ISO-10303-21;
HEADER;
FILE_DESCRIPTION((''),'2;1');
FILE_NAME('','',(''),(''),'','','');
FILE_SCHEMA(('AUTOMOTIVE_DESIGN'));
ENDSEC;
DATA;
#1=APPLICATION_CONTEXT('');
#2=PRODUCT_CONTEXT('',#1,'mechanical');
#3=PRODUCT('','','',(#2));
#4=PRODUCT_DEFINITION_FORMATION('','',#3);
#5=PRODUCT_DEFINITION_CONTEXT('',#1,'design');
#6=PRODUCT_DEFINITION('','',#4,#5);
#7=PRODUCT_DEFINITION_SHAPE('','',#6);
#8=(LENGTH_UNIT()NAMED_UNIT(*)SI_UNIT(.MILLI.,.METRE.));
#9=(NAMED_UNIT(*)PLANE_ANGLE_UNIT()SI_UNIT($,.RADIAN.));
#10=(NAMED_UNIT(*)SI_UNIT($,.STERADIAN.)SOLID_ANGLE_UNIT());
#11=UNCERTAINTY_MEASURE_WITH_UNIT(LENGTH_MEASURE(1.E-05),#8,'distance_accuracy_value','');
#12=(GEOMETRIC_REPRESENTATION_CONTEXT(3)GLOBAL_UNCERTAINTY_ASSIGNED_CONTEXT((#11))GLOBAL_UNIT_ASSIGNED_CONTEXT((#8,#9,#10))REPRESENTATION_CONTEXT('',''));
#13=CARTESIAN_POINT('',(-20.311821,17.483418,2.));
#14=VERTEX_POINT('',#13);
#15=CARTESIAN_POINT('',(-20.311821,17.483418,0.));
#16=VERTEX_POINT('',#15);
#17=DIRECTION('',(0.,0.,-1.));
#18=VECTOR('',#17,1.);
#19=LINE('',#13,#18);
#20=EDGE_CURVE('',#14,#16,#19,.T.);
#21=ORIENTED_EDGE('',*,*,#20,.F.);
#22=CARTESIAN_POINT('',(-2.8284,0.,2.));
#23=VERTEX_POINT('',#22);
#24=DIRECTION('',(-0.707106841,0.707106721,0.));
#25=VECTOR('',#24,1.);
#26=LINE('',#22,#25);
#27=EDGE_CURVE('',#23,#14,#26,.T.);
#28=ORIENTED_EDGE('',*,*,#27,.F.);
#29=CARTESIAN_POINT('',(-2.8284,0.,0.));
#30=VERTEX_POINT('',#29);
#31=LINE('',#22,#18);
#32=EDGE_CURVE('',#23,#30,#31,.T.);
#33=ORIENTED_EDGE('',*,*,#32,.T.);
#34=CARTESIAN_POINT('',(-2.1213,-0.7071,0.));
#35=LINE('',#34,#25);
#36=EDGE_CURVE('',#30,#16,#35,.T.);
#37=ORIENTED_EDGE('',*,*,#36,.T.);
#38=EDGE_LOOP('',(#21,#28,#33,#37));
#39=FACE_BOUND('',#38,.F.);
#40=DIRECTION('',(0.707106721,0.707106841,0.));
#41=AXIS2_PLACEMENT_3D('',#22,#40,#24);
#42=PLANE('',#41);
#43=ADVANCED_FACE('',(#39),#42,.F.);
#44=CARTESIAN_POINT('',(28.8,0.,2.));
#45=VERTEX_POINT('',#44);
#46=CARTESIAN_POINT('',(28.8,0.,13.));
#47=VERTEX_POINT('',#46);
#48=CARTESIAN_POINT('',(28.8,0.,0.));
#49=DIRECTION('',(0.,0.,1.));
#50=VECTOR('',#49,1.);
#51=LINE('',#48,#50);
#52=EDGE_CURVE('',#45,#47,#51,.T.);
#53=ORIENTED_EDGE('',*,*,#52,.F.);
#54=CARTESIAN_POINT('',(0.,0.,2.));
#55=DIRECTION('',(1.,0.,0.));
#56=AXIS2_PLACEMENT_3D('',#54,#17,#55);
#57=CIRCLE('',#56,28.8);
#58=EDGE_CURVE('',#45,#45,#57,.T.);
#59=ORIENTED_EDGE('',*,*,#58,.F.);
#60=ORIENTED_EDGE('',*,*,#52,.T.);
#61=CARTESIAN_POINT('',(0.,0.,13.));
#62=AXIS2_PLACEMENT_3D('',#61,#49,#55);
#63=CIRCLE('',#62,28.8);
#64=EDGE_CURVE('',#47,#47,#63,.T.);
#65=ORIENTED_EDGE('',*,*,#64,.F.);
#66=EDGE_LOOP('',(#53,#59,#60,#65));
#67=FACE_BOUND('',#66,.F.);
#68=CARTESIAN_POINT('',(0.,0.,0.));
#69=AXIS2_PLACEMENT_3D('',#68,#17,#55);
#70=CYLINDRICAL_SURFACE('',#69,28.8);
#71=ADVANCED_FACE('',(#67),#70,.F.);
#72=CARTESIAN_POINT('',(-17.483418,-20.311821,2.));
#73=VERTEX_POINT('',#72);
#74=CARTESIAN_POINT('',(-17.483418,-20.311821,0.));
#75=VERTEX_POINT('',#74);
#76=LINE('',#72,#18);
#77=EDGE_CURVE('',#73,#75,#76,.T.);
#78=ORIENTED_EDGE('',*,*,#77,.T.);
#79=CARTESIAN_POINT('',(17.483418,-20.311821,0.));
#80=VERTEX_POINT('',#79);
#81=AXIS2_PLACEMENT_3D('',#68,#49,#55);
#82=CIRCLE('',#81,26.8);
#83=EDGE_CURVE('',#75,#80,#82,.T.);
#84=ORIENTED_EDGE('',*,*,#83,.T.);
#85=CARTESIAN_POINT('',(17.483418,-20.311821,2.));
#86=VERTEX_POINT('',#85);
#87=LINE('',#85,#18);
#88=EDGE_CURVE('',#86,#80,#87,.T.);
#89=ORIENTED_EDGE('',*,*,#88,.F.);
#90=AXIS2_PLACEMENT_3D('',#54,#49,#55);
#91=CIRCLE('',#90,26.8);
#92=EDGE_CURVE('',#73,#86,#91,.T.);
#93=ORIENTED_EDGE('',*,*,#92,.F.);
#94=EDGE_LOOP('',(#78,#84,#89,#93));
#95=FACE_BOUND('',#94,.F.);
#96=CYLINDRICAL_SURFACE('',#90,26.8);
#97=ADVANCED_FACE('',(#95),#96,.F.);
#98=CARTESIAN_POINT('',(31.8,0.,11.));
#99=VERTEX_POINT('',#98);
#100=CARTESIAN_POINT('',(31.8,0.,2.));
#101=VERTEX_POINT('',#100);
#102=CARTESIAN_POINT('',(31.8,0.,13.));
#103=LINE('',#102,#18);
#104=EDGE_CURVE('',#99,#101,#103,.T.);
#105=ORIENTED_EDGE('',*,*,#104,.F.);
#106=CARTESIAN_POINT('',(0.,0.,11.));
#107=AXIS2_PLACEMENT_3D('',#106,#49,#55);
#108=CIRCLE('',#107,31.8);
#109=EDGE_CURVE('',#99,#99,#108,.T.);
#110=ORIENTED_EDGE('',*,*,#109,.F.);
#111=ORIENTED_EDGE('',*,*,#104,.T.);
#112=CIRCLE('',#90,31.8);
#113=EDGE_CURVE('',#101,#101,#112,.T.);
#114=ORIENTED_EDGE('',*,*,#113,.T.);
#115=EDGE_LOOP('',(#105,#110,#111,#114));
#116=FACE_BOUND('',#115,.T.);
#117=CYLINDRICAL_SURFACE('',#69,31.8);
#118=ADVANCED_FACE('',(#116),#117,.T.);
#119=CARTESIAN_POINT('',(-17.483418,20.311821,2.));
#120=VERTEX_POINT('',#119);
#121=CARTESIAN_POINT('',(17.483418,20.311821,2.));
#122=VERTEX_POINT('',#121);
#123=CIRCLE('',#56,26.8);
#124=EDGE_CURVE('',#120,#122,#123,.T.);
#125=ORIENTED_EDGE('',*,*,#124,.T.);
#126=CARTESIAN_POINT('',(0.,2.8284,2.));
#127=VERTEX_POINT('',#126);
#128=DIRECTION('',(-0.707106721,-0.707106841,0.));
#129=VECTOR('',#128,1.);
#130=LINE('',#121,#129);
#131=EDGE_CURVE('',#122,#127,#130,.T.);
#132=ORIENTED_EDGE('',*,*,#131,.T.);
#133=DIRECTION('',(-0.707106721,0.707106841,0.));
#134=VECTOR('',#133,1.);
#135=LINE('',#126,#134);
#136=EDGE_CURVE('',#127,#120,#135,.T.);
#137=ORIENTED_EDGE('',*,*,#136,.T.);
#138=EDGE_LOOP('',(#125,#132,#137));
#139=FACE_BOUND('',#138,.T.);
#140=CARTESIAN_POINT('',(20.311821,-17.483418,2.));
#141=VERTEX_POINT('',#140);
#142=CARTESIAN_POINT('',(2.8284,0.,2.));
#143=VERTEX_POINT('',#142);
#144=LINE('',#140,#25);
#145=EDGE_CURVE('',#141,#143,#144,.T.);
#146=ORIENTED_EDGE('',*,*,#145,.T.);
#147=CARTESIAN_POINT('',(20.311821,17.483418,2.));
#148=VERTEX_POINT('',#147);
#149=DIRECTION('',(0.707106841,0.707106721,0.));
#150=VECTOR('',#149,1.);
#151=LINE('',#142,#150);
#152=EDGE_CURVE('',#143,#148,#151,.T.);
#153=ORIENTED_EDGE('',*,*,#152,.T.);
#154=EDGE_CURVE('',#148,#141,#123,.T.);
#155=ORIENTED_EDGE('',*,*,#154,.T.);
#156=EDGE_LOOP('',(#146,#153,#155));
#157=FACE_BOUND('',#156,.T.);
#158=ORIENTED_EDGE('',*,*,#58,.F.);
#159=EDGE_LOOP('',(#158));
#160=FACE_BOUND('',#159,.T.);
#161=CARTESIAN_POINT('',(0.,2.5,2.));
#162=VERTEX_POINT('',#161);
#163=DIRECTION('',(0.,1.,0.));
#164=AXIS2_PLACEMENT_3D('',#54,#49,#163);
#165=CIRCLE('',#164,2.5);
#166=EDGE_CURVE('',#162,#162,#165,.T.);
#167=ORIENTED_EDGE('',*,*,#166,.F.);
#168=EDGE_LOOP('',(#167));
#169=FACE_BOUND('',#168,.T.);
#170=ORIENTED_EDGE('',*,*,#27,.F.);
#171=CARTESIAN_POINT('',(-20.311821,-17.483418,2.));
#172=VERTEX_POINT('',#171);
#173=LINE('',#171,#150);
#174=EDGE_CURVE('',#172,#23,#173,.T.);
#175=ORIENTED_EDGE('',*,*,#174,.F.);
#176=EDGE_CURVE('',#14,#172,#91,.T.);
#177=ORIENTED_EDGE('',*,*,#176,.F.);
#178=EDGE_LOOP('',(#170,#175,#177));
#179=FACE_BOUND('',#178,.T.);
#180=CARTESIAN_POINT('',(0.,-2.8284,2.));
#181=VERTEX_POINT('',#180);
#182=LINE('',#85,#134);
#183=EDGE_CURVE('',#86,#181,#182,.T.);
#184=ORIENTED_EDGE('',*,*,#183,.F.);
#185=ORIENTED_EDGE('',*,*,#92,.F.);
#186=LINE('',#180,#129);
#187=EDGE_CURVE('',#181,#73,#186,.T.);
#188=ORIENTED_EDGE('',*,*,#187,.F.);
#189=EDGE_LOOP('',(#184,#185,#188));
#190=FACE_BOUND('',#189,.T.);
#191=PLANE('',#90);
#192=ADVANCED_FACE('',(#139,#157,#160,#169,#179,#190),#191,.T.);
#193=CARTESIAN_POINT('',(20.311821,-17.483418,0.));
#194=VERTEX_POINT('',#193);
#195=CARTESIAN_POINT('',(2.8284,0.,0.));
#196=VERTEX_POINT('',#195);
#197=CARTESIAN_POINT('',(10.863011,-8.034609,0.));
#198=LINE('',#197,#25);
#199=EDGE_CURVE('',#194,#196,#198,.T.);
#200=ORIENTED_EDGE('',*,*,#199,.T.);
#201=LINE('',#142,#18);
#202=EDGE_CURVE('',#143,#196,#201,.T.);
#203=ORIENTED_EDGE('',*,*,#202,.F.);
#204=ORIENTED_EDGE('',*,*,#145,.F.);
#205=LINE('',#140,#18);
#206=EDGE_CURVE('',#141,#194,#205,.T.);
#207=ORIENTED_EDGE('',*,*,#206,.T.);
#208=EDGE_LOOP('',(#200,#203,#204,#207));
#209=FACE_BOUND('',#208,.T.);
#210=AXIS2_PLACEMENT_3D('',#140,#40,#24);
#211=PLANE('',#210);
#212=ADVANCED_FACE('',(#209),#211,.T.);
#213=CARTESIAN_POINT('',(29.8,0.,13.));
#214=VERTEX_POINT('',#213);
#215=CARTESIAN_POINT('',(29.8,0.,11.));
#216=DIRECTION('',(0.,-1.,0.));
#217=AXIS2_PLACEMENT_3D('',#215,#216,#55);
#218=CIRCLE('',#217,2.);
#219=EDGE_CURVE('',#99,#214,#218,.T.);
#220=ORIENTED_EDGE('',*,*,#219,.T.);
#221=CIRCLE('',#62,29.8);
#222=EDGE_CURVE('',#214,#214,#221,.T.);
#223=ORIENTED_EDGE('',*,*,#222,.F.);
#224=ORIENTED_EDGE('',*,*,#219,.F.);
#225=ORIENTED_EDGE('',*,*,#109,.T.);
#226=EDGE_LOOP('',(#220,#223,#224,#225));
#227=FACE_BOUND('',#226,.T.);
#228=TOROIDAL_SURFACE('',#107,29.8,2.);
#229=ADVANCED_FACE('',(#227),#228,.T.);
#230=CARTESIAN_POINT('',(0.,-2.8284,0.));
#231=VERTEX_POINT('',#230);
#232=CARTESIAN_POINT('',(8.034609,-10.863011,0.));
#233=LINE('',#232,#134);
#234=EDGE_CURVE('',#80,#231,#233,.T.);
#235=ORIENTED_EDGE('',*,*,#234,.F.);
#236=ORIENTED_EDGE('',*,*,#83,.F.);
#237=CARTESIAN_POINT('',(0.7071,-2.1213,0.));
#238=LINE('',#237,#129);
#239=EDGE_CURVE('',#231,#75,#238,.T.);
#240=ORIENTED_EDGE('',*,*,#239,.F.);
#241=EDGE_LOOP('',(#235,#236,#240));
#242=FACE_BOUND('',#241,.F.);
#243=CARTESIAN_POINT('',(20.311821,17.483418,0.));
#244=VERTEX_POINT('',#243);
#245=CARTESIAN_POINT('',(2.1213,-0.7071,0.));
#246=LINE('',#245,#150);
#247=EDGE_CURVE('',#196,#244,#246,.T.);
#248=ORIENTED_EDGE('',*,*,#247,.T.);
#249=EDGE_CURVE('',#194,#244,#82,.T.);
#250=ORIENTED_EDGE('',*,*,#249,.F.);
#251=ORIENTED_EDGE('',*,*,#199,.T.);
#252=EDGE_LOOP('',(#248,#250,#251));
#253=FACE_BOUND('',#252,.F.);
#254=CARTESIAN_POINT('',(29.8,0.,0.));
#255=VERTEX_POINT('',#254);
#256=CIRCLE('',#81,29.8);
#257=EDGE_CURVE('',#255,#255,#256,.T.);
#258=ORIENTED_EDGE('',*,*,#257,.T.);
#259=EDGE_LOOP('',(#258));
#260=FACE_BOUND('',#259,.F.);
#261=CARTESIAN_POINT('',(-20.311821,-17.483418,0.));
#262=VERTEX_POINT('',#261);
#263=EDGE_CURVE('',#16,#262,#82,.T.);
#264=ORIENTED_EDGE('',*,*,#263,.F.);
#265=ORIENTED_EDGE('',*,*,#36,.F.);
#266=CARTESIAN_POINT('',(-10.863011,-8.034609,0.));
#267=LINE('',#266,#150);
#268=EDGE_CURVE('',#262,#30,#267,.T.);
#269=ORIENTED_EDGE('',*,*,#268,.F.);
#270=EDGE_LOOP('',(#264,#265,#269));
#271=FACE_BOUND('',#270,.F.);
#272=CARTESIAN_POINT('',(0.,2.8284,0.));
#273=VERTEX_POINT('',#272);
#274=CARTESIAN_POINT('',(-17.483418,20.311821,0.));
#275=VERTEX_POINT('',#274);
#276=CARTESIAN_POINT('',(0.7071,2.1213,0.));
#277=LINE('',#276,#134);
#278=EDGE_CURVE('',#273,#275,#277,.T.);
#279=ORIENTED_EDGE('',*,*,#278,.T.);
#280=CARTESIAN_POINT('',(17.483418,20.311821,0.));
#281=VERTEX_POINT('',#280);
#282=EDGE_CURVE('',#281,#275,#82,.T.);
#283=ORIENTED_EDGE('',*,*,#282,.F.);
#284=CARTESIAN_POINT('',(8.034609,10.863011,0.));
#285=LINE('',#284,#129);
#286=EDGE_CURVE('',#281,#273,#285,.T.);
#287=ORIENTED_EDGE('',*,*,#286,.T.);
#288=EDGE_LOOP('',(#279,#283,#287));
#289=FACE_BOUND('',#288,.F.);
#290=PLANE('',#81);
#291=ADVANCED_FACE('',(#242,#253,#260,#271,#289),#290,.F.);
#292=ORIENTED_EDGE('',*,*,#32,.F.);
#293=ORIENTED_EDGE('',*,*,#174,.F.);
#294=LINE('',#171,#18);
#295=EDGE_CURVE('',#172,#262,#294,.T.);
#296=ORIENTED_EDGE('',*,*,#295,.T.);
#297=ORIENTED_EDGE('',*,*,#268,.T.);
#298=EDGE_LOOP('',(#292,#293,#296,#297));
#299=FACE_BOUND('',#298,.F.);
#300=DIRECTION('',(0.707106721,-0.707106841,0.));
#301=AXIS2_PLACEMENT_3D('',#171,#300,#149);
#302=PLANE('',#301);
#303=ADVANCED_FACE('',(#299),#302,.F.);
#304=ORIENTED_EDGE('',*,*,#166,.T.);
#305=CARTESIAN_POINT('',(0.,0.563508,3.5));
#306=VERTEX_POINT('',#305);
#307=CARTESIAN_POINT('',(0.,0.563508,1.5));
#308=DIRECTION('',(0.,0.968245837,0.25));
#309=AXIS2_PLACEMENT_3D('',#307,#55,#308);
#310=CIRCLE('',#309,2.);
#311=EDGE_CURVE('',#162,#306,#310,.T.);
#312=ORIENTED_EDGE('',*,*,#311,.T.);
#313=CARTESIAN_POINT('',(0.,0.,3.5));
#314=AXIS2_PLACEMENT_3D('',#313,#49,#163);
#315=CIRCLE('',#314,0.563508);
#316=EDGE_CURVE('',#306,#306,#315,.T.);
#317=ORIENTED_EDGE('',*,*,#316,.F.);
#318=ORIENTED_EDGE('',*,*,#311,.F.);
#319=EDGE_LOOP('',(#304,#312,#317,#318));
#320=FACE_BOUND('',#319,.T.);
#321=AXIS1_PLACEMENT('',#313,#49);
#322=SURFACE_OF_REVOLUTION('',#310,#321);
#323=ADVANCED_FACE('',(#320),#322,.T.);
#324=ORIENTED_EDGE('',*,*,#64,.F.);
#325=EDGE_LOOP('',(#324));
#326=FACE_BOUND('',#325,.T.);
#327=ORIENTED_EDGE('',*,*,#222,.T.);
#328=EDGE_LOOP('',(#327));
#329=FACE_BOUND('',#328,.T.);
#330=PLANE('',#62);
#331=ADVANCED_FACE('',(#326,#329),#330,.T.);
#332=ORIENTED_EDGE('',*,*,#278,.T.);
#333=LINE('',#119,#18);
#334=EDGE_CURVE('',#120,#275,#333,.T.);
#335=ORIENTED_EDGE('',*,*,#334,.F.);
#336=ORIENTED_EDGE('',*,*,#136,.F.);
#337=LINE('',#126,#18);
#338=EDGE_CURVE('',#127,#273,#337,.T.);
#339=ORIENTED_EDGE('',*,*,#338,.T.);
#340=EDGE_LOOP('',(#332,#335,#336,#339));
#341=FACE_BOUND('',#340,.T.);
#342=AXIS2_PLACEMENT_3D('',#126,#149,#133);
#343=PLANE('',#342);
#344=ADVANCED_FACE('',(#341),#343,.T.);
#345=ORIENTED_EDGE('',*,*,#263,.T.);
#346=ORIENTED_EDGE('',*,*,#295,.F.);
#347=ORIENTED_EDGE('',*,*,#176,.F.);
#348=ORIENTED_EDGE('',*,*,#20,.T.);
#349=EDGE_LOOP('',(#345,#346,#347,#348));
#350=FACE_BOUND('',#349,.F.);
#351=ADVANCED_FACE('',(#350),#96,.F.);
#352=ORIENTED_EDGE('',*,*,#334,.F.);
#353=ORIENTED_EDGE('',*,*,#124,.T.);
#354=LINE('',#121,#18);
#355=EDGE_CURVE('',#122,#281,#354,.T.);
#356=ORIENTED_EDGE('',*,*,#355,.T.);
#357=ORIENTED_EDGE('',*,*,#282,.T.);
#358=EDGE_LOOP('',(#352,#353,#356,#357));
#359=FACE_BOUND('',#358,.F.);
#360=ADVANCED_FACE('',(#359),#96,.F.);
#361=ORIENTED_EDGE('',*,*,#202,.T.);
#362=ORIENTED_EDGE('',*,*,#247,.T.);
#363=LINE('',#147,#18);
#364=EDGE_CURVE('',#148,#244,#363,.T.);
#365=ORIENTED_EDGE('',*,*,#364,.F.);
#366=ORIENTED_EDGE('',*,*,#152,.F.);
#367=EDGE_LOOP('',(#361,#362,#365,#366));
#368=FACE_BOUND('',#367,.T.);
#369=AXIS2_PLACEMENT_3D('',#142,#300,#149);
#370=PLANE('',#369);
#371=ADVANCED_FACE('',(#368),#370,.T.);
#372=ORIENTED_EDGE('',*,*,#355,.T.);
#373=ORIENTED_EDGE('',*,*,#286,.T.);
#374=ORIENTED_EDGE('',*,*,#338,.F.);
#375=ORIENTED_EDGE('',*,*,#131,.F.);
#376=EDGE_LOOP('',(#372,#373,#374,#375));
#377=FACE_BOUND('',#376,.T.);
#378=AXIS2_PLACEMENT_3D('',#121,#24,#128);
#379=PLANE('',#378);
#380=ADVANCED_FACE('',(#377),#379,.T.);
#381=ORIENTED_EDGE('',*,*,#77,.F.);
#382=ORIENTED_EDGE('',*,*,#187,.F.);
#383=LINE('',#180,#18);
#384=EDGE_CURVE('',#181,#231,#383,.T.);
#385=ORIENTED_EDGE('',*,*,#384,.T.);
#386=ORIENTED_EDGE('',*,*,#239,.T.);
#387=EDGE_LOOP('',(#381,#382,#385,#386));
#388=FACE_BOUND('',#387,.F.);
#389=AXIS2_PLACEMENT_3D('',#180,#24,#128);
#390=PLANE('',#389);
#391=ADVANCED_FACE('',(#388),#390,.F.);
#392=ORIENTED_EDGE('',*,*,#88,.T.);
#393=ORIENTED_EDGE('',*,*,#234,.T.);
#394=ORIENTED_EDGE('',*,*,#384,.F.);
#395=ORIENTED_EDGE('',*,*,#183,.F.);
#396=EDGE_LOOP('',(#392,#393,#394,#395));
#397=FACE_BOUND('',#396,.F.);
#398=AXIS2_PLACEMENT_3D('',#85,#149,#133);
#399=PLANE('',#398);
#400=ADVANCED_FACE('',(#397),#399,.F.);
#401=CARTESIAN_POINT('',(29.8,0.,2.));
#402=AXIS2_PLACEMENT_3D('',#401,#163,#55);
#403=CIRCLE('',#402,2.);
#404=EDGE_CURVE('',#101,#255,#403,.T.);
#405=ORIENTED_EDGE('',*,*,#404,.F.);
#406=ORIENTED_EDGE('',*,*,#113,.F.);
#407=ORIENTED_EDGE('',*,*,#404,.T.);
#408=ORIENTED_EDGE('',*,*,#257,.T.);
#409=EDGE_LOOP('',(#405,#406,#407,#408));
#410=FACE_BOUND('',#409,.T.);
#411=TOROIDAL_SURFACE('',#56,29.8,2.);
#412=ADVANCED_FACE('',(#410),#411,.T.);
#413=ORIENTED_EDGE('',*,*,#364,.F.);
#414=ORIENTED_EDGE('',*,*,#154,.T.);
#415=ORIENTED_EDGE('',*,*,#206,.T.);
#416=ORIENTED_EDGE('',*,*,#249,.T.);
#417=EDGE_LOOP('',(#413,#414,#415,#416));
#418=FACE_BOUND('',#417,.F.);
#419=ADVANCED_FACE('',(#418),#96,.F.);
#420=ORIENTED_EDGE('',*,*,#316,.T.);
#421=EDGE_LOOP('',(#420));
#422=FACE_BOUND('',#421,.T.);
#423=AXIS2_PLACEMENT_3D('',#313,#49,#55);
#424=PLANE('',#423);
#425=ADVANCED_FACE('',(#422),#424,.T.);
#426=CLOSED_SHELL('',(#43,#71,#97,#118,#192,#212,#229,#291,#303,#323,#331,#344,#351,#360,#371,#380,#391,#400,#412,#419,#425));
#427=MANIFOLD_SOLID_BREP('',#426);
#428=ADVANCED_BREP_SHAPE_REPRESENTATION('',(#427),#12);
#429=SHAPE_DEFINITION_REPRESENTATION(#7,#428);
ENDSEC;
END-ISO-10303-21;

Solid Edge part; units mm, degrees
sketch "Sketch1" plane through (0, 0, 0) normal (0, 0, 1) x (1, 0, 0)
  circle A0 centre (0, 0) radius 31.8
extrude "Protrusion1" add sketch "Sketch1" along normal blind 2
sketch "Sketch2" plane through (0, 0, 0) normal (0, 0, 1) x (1, 0, 0)
  circle A0 centre (0, 0) radius 28.8
  circle A1 centre (0, 0) radius 31.8
  dimension "D1" = 3
extrude "ExtrudedProtrusion_3" add sketch "Sketch2" along normal blind 13
fillet "Round_2" radius 2 1 edges at (-31.8, 0, 0)
sketch "Sketch3" plane through (0, 0, 2) normal (0, 0, 1) x (0, 1, 0)
  circle A0 centre (0, 0) radius 2.5
extrude "ExtrudedProtrusion_4" add sketch "Sketch3" along normal blind 1.5
fillet "Round_3" radius 2 1 edges at (0, -2.5, 3.5)
fillet "Round_4" radius 2 1 edges at (-31.8, 0, 13)
sketch "Sketch4" plane through (0, 0, 2) normal (0, 0, 1) x (1, 0, 0)
  line L0 (-20.3118, -17.4834) -> (-2.8284, 0)
  line L1 (-2.8284, 0) -> (-20.3118, 17.4834)
  arc A0 (-20.3118, 17.4834) -> (-20.3118, -17.4834) centre (0, 0) ccw
  line L2 (0, -2.8284) -> (-17.4834, -20.3118)
  arc A1 (-17.4834, -20.3118) -> (17.4834, -20.3118) centre (0, 0) ccw
  line L3 (17.4834, -20.3118) -> (0, -2.8284)
  line L4 (17.4834, 20.3118) -> (0, 2.8284)
  line L5 (0, 2.8284) -> (-17.4834, 20.3118)
  arc A2 (-17.4834, 20.3118) -> (17.4834, 20.3118) centre (0, 0) cw
  line L6 (2.8284, 0) -> (20.3118, 17.4834)
  arc A3 (20.3118, 17.4834) -> (20.3118, -17.4834) centre (0, 0) cw
  line L7 (20.3118, -17.4834) -> (2.8284, 0)
extrude "ExtrudedCutout_1" cut sketch "Sketch4" against normal blind 22.2905
